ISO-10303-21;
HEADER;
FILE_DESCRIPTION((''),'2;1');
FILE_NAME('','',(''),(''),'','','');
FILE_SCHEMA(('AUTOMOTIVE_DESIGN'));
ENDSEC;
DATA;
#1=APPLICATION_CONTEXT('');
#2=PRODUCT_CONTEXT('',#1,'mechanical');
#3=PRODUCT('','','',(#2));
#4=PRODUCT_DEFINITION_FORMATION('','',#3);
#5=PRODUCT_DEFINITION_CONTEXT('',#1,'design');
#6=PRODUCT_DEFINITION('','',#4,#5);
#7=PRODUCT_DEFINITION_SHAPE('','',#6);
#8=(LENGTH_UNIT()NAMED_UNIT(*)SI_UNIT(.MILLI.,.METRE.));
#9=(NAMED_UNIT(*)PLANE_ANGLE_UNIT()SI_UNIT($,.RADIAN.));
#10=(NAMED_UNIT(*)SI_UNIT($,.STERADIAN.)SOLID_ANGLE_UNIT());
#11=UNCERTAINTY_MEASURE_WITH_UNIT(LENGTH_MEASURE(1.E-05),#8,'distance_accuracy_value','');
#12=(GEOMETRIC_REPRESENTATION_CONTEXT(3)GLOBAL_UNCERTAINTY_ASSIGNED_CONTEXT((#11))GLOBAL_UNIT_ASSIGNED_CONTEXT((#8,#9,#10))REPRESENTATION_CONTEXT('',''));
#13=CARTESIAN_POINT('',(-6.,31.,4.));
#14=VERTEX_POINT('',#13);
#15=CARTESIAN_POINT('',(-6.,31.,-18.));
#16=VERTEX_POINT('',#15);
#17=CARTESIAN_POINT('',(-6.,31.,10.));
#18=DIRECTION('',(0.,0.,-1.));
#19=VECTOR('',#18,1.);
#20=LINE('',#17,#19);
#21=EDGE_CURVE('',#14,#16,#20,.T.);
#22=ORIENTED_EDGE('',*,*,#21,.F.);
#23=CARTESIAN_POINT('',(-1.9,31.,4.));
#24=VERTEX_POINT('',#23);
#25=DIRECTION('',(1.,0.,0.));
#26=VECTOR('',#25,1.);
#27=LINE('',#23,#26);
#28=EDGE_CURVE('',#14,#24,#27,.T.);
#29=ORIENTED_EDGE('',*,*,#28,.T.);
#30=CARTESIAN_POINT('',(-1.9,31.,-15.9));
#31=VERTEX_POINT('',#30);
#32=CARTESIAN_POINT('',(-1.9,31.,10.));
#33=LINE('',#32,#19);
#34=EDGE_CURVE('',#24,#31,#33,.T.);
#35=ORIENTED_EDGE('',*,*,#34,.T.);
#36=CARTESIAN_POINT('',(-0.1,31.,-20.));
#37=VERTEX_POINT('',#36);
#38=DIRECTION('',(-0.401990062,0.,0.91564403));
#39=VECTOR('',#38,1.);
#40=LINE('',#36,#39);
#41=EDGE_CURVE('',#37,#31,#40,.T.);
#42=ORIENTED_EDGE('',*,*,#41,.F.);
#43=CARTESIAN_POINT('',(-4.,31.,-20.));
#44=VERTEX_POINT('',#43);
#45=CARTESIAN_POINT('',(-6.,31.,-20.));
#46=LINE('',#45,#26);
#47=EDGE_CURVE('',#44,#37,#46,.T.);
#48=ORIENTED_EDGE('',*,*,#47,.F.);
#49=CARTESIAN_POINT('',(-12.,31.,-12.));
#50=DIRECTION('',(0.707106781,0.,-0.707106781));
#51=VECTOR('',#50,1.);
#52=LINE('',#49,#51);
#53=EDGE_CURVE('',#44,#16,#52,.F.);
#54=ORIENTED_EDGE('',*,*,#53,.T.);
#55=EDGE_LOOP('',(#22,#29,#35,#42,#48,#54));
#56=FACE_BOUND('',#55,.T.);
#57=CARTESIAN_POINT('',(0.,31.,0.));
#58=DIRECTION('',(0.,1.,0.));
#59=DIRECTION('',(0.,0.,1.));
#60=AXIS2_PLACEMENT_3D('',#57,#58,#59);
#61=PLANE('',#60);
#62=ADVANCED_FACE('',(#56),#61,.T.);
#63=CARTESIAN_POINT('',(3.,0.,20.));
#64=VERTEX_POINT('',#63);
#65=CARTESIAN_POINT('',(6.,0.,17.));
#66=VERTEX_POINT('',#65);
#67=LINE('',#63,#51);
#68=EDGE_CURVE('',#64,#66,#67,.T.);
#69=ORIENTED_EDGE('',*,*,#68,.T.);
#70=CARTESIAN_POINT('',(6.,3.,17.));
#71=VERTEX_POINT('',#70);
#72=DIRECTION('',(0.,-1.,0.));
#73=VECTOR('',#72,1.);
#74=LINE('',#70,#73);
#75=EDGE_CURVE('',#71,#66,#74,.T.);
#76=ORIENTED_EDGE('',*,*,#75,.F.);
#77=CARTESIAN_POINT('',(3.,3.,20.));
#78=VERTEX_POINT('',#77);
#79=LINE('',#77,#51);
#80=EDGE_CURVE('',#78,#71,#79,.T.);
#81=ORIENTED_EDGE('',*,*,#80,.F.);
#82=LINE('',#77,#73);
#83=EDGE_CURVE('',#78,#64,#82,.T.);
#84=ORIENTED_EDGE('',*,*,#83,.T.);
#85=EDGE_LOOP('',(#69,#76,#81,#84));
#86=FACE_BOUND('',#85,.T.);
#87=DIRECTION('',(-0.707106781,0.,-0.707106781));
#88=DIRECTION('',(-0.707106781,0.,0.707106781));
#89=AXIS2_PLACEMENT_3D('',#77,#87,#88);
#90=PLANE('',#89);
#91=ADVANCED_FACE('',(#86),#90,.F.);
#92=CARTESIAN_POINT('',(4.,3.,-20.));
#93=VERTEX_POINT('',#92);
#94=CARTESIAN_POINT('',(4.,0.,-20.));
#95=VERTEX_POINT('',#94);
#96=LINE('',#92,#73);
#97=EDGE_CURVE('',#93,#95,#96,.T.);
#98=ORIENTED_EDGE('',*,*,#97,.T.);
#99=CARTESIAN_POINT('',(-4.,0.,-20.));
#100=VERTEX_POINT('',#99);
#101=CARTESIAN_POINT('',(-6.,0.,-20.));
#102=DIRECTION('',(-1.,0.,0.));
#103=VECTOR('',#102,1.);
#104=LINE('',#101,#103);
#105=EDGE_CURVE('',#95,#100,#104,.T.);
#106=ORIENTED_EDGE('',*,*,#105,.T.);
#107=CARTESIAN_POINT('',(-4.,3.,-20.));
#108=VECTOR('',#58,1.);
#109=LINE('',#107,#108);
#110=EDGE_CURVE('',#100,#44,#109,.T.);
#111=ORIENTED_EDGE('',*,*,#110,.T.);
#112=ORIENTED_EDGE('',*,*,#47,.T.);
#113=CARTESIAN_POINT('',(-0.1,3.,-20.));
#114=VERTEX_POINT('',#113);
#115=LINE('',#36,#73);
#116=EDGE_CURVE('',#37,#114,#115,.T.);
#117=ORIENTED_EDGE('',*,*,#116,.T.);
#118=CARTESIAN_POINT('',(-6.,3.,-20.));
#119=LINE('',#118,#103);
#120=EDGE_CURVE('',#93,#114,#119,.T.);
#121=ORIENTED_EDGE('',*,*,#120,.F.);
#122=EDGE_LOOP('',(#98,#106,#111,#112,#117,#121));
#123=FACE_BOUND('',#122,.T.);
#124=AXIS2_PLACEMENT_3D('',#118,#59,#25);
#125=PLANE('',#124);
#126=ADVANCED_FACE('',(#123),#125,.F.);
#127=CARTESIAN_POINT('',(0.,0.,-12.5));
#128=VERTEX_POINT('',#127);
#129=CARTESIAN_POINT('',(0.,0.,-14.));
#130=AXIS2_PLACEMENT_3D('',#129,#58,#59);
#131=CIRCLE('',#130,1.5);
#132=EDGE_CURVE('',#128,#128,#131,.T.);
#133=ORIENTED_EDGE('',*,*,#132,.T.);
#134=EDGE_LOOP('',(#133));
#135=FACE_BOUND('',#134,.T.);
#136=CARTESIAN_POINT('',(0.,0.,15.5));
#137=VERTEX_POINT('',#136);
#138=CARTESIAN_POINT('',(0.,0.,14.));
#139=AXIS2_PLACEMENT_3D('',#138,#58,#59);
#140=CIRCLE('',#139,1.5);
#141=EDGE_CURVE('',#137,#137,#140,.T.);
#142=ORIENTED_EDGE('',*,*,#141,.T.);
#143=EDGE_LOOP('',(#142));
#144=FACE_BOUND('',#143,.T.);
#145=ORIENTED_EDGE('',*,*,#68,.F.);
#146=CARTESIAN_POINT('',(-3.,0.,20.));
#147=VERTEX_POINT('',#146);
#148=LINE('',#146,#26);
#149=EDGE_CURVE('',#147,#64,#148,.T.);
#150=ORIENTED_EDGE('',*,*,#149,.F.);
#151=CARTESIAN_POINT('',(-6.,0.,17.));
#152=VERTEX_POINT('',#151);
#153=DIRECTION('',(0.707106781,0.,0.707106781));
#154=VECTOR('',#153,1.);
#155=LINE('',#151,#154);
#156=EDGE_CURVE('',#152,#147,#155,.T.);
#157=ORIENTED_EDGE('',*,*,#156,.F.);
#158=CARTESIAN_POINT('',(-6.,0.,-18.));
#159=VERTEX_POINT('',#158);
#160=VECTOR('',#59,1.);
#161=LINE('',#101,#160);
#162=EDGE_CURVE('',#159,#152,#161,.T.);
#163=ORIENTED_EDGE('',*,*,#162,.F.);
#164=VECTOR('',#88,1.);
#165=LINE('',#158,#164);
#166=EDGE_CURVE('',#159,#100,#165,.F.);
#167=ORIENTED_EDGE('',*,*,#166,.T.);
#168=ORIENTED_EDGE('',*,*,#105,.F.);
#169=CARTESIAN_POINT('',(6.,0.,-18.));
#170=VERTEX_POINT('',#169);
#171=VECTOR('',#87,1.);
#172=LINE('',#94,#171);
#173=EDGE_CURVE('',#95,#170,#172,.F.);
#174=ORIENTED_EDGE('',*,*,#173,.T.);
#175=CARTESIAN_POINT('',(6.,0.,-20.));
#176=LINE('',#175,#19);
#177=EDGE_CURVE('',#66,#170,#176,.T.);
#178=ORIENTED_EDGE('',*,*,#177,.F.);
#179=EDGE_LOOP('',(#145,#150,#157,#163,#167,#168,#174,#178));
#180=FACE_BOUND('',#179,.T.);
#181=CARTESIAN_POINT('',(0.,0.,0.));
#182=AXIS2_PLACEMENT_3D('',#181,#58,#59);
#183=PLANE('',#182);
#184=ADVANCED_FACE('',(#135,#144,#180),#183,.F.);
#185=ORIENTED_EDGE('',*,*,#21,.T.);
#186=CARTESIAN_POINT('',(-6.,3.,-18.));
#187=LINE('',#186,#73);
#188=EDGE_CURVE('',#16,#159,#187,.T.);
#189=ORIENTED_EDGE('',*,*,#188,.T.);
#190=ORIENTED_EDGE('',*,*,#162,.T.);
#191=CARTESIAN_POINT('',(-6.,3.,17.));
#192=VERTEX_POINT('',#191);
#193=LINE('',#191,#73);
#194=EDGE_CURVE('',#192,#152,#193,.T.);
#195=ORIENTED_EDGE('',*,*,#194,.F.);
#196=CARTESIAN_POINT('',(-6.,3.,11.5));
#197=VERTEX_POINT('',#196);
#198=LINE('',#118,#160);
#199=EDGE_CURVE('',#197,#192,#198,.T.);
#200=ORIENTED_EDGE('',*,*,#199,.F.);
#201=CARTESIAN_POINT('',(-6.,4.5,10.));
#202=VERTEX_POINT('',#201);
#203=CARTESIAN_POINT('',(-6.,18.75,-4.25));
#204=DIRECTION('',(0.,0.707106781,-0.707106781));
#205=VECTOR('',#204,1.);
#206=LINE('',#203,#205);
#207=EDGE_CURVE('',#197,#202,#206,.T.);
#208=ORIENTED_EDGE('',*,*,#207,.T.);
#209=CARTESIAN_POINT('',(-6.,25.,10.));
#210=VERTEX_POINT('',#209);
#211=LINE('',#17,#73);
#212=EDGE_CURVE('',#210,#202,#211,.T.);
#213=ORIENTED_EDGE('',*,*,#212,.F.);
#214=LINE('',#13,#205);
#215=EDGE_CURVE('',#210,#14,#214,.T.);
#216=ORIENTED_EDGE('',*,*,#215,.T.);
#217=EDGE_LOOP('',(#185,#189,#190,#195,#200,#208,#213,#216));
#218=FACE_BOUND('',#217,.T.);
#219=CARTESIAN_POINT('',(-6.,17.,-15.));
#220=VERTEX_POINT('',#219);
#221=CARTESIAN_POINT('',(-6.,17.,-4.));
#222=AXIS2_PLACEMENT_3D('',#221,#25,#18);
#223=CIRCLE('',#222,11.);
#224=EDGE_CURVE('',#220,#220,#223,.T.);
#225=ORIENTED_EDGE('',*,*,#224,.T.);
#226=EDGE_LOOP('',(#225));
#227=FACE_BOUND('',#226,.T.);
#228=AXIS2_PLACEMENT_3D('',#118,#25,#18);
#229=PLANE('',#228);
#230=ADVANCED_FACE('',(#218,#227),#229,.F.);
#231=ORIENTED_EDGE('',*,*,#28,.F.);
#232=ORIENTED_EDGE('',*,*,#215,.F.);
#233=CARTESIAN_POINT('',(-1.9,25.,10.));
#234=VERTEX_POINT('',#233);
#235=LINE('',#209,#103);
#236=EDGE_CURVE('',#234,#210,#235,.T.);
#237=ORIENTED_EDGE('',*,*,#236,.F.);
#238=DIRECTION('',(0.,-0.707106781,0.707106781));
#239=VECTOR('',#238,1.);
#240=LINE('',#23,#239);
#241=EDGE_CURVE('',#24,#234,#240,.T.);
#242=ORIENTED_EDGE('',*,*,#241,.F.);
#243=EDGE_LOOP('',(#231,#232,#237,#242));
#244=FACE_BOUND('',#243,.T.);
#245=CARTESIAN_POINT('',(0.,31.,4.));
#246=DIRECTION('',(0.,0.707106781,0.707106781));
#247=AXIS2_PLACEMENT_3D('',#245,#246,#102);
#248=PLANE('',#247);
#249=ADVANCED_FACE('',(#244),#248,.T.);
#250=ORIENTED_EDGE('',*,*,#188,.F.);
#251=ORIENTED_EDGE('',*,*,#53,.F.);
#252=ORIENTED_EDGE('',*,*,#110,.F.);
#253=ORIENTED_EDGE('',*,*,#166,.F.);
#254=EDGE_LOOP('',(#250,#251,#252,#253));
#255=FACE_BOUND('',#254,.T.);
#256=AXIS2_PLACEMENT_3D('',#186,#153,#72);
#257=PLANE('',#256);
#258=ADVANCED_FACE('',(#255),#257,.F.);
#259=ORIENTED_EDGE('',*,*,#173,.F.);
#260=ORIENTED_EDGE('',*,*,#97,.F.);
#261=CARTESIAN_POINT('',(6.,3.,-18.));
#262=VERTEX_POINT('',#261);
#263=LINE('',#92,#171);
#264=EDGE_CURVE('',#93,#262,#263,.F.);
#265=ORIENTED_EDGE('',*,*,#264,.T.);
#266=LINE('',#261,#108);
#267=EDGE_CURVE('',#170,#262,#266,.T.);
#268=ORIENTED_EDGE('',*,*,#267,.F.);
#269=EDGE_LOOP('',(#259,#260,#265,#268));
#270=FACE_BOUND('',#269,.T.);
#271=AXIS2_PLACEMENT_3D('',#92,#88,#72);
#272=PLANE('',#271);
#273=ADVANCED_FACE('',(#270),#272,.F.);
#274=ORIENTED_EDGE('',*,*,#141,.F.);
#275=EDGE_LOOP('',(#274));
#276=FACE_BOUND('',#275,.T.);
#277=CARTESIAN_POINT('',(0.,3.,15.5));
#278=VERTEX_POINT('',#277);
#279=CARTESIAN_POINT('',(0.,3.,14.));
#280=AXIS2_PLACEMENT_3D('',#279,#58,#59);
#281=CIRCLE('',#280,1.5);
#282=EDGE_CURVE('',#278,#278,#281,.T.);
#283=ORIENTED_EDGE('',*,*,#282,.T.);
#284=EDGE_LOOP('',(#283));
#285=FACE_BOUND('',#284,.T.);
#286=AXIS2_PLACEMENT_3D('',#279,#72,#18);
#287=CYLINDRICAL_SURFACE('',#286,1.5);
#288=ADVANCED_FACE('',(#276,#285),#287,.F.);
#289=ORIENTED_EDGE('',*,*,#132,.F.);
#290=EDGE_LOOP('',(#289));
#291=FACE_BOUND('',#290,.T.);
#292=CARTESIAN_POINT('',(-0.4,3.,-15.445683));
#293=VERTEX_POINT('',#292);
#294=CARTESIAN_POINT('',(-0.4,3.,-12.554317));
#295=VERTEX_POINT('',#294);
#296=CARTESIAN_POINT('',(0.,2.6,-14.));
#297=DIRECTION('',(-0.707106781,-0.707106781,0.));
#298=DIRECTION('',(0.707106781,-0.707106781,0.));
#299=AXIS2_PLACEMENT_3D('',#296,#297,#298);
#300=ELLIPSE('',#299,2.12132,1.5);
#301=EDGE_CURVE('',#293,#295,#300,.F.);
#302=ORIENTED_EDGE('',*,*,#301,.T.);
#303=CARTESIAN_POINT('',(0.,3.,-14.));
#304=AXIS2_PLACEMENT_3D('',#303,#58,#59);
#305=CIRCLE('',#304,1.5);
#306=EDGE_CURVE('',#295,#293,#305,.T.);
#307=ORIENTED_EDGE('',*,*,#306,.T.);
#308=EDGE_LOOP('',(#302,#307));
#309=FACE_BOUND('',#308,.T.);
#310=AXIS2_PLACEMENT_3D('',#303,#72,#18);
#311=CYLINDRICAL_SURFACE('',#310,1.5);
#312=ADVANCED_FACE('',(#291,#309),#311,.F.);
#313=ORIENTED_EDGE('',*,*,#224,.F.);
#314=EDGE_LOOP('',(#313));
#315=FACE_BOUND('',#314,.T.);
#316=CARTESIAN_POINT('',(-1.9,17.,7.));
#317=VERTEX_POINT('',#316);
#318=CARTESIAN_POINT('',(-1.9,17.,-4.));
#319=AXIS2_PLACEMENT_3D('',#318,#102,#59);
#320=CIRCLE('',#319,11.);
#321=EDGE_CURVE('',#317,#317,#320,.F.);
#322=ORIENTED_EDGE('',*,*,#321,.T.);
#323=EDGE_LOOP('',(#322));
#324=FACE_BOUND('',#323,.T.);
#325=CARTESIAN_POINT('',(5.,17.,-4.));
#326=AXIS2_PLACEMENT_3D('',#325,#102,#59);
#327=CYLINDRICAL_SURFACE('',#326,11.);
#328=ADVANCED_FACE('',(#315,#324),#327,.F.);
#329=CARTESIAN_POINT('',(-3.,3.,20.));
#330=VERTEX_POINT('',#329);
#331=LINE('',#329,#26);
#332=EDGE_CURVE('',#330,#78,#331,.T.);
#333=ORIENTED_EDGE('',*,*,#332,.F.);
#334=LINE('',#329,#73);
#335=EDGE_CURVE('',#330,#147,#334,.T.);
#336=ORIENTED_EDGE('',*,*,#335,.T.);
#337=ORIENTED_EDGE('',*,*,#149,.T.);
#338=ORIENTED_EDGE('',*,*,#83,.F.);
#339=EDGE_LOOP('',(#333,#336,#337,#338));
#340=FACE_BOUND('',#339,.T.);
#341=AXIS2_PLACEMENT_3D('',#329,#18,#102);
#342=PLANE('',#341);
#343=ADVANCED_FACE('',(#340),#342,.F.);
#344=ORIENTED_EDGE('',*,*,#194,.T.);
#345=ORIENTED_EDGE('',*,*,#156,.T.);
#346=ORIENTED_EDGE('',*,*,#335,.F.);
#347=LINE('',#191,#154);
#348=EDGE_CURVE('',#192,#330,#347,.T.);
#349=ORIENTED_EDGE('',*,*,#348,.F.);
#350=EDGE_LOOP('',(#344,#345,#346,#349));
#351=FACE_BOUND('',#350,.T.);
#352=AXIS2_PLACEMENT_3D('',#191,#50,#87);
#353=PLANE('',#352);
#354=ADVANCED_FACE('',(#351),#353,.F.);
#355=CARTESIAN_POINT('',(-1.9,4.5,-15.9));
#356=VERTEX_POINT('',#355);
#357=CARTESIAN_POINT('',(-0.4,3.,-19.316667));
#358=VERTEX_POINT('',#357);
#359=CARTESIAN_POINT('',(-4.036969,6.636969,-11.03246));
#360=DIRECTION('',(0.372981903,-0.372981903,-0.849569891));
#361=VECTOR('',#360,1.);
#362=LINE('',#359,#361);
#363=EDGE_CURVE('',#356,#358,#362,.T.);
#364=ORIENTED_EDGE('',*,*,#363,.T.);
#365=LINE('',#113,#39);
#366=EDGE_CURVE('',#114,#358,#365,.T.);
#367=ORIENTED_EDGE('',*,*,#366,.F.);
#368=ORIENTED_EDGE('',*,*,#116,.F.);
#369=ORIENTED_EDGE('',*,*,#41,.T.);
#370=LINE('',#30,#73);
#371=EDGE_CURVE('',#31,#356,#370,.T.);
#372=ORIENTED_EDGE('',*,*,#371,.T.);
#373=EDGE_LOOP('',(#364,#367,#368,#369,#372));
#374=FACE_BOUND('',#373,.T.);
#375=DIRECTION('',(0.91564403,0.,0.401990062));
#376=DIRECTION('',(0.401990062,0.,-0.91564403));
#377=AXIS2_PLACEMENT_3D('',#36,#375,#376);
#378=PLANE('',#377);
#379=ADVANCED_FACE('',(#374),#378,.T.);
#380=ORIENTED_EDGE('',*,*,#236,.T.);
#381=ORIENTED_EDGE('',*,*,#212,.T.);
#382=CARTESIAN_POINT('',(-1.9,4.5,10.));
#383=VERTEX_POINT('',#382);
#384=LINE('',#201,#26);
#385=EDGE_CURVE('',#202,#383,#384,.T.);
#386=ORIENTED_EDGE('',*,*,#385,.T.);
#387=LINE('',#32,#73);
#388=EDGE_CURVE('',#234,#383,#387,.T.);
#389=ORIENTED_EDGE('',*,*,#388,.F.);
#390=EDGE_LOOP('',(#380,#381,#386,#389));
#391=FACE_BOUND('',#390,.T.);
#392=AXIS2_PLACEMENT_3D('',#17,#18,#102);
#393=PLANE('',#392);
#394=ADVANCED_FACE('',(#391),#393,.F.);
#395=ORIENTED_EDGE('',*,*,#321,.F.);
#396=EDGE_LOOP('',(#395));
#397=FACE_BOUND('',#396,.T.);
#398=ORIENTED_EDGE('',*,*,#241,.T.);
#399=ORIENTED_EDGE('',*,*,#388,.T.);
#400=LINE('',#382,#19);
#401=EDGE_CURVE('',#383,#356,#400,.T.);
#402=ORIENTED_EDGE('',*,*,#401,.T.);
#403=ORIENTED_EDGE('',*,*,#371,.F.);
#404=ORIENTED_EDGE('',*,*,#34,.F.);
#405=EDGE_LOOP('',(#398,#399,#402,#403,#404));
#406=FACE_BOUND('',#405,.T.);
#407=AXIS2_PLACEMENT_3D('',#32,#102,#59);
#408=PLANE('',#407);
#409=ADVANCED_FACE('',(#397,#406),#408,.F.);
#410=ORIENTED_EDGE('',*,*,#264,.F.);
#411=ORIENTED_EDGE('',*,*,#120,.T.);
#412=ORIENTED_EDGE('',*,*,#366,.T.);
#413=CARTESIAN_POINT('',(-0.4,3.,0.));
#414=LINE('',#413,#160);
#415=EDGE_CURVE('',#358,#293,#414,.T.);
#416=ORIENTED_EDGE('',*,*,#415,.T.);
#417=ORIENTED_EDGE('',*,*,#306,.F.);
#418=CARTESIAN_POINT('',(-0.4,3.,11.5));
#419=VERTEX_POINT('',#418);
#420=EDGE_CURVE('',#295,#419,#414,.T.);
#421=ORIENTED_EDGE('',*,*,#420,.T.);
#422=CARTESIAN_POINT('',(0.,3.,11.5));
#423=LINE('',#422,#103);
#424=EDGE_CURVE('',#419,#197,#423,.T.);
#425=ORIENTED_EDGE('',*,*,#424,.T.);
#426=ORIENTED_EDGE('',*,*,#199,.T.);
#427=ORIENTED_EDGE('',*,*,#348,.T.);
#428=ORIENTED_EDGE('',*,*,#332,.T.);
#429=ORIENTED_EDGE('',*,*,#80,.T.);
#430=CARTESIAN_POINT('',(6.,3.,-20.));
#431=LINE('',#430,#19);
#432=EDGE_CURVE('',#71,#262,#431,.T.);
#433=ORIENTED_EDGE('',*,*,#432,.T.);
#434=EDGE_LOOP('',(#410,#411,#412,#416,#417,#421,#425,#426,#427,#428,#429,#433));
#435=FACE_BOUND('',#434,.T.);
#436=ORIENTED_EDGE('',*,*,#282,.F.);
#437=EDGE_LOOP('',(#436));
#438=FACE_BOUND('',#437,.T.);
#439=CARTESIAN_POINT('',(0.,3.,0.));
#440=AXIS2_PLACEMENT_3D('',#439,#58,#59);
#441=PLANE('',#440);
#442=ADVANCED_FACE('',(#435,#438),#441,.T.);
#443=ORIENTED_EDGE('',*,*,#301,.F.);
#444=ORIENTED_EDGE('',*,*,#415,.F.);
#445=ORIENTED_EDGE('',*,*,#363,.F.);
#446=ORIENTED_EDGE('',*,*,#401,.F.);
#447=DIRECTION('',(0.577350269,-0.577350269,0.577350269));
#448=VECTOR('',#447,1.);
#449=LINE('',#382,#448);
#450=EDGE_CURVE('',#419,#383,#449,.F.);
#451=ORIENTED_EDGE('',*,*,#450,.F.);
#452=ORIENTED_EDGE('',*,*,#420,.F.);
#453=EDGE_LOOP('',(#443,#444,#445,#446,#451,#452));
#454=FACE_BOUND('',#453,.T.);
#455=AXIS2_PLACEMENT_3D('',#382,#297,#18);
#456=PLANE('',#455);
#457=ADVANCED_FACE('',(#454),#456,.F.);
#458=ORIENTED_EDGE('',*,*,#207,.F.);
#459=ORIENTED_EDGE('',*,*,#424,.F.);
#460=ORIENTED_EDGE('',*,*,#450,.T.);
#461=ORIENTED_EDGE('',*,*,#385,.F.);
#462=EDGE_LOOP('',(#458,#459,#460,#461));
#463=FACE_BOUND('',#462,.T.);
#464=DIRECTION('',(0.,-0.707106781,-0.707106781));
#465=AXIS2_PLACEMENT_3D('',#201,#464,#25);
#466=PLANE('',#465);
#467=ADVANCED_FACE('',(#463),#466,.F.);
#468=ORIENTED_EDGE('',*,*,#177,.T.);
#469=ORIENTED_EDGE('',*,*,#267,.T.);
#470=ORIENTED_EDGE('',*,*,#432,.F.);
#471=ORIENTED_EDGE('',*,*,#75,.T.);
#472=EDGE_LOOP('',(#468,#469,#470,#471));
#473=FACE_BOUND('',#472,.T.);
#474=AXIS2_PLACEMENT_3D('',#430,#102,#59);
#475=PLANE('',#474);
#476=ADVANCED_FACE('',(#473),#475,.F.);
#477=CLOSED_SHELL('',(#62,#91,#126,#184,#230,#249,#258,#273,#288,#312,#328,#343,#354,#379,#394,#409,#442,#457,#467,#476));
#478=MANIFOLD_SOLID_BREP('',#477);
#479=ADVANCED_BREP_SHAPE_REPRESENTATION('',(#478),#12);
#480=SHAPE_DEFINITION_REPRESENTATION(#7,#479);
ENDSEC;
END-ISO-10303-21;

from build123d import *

# Parameters (mm, degrees)
SKETCH1_R                = 1.5
BOSS_EXTRUDE1_DEPTH      = 3
BOSS_EXTRUDE2_DEPTH      = 28
CHAMFER1_SIZE            = 2
SKETCH4_R                = 11
CUT_EXTRUDE1_DEPTH       = 11
CHAMFER2_SIZE            = 6
CHAMFER2_OF_MIRROR3_SIZE = 6
CHAMFER3_SIZE            = 2
SKETCH5_W                = 30
SKETCH5_H                = 28
CUT_EXTRUDE2_DEPTH       = 11
CHAMFER4_SIZE            = 1.5


with BuildPart() as part:
    # Sketch1 → Boss-Extrude1 (new body)
    with BuildSketch(Plane(origin=(0, 0, 0), x_dir=(1, 0, 0), z_dir=(0, 1, 0))):
        Polygon((-6, 20), (6, 20), (6, -17), (3, -20), (-3, -20), (-6, -17), align=None)
        with Locations(Location((0, 14, 0), (0, 0, 270))):
            Circle(SKETCH1_R, mode=Mode.SUBTRACT)
        with Locations(Location((0, -14, 0), (0, 0, 270))):
            Circle(SKETCH1_R, mode=Mode.SUBTRACT)
    extrude(amount=BOSS_EXTRUDE1_DEPTH)

    # Sketch2 → Boss-Extrude2 (add)
    with BuildSketch(Plane(origin=(0, 3, 0), x_dir=(1, 0, 0), z_dir=(0, 1, 0))):
        Polygon((6, -10), (6, 20), (0.1, 20), (1.9, 15.9), (1.9, -10), align=None)
    boss_extrude2 = extrude(amount=BOSS_EXTRUDE2_DEPTH)

    # Chamfer1
    chamfer1_edges = [part.edges().sort_by_distance(p)[0] for p in [
        (6, 15.5, -20),
    ]]
    chamfer(chamfer1_edges, length=CHAMFER1_SIZE)

    # Sketch4 → Cut-Extrude1 (cut)
    with BuildSketch(Plane(origin=(6, 0, 0), x_dir=(0, 0, -1), z_dir=(1, 0, 0))):
        with Locations((4, 17)):
            Circle(SKETCH4_R)
    cut_extrude1 = extrude(amount=-CUT_EXTRUDE1_DEPTH, mode=Mode.SUBTRACT)

    # Chamfer2
    chamfer2_edges = [part.edges().sort_by_distance(p)[0] for p in [
        (3.95, 31, 10),
    ]]
    chamfer(chamfer2_edges, length=CHAMFER2_SIZE)

    # Mirror3: Boss-Extrude2, Cut-Extrude1 across plane
    add(boss_extrude2.mirror(Plane(origin=(0, 0, 0), x_dir=(0, 0, 1), z_dir=(1, 0, 0))))
    add(cut_extrude1.mirror(Plane(origin=(0, 0, 0), x_dir=(0, 0, 1), z_dir=(1, 0, 0))), mode=Mode.SUBTRACT)

    # Chamfer2 of Mirror3
    chamfer2_of_mirror3_edges = [part.edges().sort_by_distance(p)[0] for p in [
        (-3.95, 31, 10),
    ]]
    chamfer(chamfer2_of_mirror3_edges, length=CHAMFER2_OF_MIRROR3_SIZE)

    # Chamfer3
    chamfer3_edges = [part.edges().sort_by_distance(p)[0] for p in [
        (-6, 15.5, -20),
    ]]
    chamfer(chamfer3_edges, length=CHAMFER3_SIZE)

    # Sketch5 → Cut-Extrude2 (cut)
    with BuildSketch(Plane(origin=(0, 0, 0), x_dir=(0, 0, -1), z_dir=(1, 0, 0))):
        with Locations((5, 17)):
            Rectangle(SKETCH5_W, SKETCH5_H)
    extrude(amount=CUT_EXTRUDE2_DEPTH, mode=Mode.SUBTRACT)

    # Chamfer4
    # the kernel refuses this chamfer: 1.5 mm, written as the material it adds along each edge
    with BuildSketch(Plane(origin=(-1.9, 3, 10), x_dir=(0, -0.02749587661058648, 0.9996219169112968), z_dir=(-1, 0, 0))) as chamfer4_piece_1:
        Polygon((CHAMFER4_SIZE * 0.999621916911, CHAMFER4_SIZE * 0.0274958766106), (-CHAMFER4_SIZE * 0.0274958766106, CHAMFER4_SIZE * 0.999621916911), (0, 0), align=None)
    extrude(amount=4.1)
    with BuildSketch(Plane(origin=(-1.9, 3, -19.757524482), x_dir=(-0.02749587661058635, 0.9996219169112968, 0), z_dir=(0, 0, 1))) as chamfer4_piece_2_section:
        Polygon((CHAMFER4_SIZE * 0.999621916911, -CHAMFER4_SIZE * 0.0274958766106), (-CHAMFER4_SIZE * 0.0274958766106, -CHAMFER4_SIZE * 0.999621916911), (0, 0), align=None)
    chamfer4_piece_2 = extrude(amount=29.757524482, mode=Mode.PRIVATE)
    chamfer4_piece_2 = chamfer4_piece_2 - Plane(origin=(0, 3.558405008, -14), x_dir=(0, 0, 1), z_dir=(0, -1, 0)) * Cylinder(1.5, 66, mode=Mode.PRIVATE)
    add(chamfer4_piece_2)
    with BuildSketch(Plane(origin=(-1.9, 3, -19.757524482), x_dir=(-0.02749587661058635, 0.9996219169112968, 0), z_dir=(0, 0, 1))) as chamfer4_piece_3a_section:
        Polygon((CHAMFER4_SIZE * 0.999621916911, -CHAMFER4_SIZE * 0.0274958766106), (-CHAMFER4_SIZE * 0.0274958766106, -CHAMFER4_SIZE * 0.999621916911), (0, 0), align=None)
    chamfer4_piece_3a = extrude(amount=33.615048964, mode=Mode.PRIVATE)
    chamfer4_piece_3a = split(chamfer4_piece_3a, bisect_by=Plane(origin=(-1.452850979, 3.51967463, 10), z_dir=(0, 0, 1)), keep=Keep.TOP, mode=Mode.PRIVATE)
    chamfer4_piece_3a = chamfer4_piece_3a - Plane(origin=(0, 3.51967463, 14), x_dir=(0, 0, 1), z_dir=(0, -1, 0)) * Cylinder(1.5, 74, mode=Mode.PRIVATE)
    with BuildSketch(Plane(origin=(1.957524482, 3, 10), x_dir=(0, -0.02749587661058648, 0.9996219169112968), z_dir=(-1, 0, 0))) as chamfer4_piece_3b_section:
        Polygon((CHAMFER4_SIZE * 0.999621916911, CHAMFER4_SIZE * 0.0274958766106), (-CHAMFER4_SIZE * 0.0274958766106, CHAMFER4_SIZE * 0.999621916911), (0, 0), align=None)
    chamfer4_piece_3b = extrude(amount=7.957524482, mode=Mode.PRIVATE)
    chamfer4_piece_3b = split(chamfer4_piece_3b, bisect_by=Plane(origin=(-1.9, 3.49469044, 10.49469044), z_dir=(1, 0, 0)), keep=Keep.TOP, mode=Mode.PRIVATE)
    chamfer4_piece_3 = chamfer4_piece_3a & chamfer4_piece_3b
    add(chamfer4_piece_3)


solid = part.part
